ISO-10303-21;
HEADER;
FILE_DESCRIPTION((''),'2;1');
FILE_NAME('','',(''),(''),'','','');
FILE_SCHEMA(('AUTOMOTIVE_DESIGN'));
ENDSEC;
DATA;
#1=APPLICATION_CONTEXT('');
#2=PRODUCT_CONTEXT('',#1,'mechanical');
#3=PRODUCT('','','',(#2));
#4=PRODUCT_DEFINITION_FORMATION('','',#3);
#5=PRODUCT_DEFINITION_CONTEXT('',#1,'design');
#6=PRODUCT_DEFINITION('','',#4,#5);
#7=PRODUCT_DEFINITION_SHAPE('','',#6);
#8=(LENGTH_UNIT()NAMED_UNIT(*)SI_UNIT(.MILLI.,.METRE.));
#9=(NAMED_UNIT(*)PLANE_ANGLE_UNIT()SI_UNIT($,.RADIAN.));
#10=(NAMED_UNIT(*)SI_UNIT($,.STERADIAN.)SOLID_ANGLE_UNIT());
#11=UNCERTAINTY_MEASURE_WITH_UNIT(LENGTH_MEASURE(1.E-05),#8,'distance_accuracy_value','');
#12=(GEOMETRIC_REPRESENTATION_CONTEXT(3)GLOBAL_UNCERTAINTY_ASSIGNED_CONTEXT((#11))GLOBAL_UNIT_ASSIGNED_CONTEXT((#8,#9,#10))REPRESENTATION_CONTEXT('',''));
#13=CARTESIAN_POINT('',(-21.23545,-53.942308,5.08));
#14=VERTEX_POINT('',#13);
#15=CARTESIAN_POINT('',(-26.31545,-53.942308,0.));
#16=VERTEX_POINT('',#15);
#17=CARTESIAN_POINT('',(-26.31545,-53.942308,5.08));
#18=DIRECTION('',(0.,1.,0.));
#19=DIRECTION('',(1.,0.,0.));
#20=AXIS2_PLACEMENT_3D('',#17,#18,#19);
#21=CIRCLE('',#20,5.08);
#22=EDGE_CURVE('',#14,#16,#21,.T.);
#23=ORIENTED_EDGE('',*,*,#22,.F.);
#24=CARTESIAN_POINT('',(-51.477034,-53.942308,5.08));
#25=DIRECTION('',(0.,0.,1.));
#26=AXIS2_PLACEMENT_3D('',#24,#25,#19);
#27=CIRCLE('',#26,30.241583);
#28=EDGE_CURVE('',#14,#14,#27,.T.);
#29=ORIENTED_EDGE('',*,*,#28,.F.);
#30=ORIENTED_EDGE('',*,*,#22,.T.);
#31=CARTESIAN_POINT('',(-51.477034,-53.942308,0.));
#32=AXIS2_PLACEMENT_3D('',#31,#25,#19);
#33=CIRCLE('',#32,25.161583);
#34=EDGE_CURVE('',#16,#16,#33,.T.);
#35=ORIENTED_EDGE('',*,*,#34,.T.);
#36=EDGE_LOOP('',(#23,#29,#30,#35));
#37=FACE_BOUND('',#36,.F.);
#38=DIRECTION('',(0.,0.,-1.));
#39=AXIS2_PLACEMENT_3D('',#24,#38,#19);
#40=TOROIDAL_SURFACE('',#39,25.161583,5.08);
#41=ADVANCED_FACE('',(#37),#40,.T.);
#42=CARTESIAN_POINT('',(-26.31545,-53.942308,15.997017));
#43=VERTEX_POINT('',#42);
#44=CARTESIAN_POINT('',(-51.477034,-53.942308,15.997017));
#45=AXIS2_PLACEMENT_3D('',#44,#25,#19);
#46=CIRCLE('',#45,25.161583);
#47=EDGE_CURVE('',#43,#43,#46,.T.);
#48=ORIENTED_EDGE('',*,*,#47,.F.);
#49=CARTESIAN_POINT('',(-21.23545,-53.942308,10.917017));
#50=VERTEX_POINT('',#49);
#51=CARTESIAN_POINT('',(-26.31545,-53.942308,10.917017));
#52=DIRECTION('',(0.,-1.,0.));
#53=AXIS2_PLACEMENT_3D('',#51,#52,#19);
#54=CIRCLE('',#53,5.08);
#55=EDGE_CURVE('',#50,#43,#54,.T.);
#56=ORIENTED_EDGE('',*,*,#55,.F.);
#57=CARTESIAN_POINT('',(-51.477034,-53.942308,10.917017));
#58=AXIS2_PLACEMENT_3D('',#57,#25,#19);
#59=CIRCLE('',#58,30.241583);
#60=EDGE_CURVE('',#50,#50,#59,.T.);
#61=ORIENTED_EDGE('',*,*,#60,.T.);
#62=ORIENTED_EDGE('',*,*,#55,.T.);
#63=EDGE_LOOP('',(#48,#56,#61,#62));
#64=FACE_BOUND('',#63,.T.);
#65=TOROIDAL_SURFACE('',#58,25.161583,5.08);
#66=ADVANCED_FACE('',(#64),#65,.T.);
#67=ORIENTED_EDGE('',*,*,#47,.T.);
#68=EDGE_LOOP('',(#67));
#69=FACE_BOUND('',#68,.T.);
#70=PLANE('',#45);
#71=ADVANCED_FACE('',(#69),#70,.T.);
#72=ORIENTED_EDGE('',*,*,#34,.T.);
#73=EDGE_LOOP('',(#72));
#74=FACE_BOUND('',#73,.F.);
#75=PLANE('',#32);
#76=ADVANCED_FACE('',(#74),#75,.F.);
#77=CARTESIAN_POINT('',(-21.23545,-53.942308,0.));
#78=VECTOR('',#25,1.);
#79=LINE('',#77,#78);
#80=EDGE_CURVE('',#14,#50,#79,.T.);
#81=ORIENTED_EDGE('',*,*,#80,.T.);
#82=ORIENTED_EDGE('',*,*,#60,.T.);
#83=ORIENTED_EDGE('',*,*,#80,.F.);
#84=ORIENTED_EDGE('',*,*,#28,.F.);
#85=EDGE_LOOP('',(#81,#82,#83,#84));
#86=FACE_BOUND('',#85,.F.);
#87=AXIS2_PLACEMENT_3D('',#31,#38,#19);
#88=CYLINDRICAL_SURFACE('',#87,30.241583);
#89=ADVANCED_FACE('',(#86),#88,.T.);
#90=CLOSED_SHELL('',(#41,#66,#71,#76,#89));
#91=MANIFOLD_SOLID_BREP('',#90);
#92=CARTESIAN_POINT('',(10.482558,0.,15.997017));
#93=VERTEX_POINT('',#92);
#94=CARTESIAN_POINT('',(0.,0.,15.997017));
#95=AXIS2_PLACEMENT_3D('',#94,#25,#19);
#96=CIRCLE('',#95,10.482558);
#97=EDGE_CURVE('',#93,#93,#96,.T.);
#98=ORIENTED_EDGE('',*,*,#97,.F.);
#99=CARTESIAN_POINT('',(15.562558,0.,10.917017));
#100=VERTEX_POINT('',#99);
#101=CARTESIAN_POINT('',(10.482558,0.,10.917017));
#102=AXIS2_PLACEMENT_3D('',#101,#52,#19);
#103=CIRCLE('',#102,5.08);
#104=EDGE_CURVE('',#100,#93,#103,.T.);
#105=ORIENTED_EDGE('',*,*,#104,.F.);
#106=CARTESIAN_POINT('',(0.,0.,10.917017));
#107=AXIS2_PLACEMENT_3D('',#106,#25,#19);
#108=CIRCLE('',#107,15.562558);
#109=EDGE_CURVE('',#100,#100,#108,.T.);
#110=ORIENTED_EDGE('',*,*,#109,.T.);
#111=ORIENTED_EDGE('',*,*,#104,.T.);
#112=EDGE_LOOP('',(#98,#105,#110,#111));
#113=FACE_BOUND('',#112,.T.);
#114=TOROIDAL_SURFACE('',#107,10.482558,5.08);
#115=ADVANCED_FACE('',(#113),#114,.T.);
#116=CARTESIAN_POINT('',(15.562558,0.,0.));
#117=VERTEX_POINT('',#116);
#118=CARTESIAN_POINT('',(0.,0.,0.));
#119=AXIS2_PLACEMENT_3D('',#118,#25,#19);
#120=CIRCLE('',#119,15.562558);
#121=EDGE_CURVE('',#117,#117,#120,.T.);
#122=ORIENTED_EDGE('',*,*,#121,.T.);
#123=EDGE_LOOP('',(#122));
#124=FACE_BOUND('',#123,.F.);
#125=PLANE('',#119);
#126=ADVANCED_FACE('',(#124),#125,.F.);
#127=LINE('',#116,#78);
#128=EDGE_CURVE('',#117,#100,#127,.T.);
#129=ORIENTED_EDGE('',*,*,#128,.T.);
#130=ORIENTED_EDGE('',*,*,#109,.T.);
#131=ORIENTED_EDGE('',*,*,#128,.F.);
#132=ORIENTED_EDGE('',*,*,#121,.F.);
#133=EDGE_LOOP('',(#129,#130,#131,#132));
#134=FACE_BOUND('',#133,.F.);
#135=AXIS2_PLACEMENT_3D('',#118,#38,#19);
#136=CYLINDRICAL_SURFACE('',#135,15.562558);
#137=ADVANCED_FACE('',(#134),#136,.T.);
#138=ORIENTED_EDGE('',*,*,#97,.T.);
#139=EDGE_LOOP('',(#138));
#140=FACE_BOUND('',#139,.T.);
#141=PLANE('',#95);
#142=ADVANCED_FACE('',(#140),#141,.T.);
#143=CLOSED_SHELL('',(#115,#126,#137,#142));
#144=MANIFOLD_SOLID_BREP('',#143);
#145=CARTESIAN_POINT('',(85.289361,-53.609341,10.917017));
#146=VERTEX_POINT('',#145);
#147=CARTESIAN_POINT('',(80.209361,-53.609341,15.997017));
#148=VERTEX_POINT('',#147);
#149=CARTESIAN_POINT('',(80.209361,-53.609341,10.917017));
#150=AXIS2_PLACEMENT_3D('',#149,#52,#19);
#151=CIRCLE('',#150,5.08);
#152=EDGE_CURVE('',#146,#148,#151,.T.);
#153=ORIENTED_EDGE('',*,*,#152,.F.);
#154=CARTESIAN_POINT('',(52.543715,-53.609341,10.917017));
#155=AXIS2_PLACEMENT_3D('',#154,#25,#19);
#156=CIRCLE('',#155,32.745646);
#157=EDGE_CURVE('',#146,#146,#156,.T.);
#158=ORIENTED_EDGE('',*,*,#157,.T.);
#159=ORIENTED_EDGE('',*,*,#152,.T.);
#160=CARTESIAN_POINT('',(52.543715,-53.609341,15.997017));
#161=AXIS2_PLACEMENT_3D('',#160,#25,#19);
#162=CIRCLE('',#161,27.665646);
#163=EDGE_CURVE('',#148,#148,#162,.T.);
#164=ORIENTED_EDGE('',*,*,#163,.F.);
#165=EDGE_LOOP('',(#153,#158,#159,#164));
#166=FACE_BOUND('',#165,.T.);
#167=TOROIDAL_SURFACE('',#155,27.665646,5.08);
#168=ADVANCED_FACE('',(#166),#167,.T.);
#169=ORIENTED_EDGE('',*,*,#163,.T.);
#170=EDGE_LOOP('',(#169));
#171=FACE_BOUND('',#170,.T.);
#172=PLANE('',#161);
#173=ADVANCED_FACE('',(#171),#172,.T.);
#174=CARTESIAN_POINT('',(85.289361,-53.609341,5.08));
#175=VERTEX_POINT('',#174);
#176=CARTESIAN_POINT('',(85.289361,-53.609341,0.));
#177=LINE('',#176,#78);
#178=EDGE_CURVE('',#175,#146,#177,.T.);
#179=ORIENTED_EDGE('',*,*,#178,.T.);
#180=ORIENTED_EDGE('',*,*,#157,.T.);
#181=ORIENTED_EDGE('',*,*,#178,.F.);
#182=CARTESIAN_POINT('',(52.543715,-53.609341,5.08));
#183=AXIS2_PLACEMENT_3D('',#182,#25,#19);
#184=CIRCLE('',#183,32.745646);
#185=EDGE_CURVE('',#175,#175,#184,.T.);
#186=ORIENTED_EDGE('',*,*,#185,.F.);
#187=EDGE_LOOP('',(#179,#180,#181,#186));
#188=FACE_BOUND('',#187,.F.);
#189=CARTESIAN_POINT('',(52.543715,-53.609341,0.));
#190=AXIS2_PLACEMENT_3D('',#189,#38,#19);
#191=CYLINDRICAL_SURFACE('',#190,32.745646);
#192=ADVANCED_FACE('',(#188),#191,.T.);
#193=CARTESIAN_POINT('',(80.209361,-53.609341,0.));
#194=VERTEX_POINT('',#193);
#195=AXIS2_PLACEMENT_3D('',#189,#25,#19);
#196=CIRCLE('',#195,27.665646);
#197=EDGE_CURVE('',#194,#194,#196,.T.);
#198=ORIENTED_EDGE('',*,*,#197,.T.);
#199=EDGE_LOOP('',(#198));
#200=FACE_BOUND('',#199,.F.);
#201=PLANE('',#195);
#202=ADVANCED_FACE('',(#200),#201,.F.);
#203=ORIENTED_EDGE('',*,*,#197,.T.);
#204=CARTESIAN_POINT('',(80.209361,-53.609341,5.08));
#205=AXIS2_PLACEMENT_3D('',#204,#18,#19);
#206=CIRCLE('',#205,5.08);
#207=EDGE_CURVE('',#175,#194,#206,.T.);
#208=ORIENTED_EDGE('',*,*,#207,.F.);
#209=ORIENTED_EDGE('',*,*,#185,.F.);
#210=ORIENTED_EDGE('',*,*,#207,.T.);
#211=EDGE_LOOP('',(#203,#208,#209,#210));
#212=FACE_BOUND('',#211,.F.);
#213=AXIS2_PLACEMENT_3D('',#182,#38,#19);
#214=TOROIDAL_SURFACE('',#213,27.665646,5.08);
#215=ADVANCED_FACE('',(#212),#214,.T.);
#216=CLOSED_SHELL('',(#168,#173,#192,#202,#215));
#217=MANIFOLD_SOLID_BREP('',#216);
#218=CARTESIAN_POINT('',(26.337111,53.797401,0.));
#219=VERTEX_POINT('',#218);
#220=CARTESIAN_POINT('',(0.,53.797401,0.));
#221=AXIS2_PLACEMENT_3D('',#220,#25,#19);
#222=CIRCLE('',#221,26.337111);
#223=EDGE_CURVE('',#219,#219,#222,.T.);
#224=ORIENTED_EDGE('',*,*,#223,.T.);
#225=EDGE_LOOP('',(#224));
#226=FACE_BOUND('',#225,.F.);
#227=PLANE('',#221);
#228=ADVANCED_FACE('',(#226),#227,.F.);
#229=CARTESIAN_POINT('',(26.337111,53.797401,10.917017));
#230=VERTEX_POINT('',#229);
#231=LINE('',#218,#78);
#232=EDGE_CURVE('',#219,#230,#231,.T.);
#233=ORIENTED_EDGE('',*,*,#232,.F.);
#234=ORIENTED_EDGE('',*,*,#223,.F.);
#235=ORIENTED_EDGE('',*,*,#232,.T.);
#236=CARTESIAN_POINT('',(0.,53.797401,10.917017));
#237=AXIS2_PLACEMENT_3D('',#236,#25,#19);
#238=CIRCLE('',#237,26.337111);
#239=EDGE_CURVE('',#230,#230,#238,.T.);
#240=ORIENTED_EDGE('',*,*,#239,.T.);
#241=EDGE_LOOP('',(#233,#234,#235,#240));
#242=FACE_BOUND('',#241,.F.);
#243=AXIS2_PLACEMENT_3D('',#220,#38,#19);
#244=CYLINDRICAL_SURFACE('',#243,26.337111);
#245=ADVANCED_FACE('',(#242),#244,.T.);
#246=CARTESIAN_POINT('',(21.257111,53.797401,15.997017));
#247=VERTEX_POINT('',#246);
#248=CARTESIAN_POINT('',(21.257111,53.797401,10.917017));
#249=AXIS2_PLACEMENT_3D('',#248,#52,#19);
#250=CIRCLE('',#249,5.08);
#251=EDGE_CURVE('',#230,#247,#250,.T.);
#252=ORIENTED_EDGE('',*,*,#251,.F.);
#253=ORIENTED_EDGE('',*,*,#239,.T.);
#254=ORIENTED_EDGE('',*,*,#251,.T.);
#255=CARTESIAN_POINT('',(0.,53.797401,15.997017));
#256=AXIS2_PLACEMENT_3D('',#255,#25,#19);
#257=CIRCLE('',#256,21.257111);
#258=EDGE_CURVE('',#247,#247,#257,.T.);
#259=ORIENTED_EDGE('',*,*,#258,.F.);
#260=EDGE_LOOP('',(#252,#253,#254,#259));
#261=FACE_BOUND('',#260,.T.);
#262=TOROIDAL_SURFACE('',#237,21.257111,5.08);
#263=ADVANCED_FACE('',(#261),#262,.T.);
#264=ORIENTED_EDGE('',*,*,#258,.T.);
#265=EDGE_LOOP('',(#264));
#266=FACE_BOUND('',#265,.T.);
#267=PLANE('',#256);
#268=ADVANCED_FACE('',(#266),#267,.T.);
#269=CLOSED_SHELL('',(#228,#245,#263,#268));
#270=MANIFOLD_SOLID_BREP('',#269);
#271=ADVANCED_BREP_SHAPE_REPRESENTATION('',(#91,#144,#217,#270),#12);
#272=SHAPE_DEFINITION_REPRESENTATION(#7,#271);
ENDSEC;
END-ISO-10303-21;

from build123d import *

# Parameters (mm, degrees)
F1_R     = 32.7456463168
F2_DEPTH = 15.9970168024
F1_R_2   = 30.2415831597
F1_R_3   = 26.3371113364
F0_R     = 15.5625582152
F3_R     = 5.08
F3_2_R   = 5.08
F3_3_R   = 5.08
F3_4_R   = 5.08


# Not quite as in the source:
# - a feature of the source that left no trace in its solid (it failed there, or was rolled back) is left out


with BuildPart() as f2:
    # F1 (on Top) → F2 (new body)
    with BuildSketch(Plane.XY):
        with Locations((52.5437146425, -53.609341383)):
            Circle(F1_R)
    extrude(amount=F2_DEPTH)

    # F3
    f3_edges = [f2.edges().sort_by_distance(p)[0] for p in [
        (19.798068, -53.609341, 15.997017),
        (19.798068, -53.609341, 0),
    ]]
    fillet(f3_edges, radius=F3_R)


with BuildPart() as f2b:
    # F1 (on Top) → F2, piece 2 (new body)
    with BuildSketch(Plane.XY):
        with Locations((-51.4770336449, -53.9423078299)):
            Circle(F1_R_2)
    extrude(amount=F2_DEPTH)

    # F3#2
    f3_2_edges = [f2b.edges().sort_by_distance(p)[0] for p in [
        (-81.718617, -53.942308, 15.997017),
        (-81.718617, -53.942308, 0),
    ]]
    fillet(f3_2_edges, radius=F3_2_R)


with BuildPart() as f2c:
    # F1 (on Top) → F2, piece 3 (new body)
    with BuildSketch(Plane.XY):
        with Locations((0, 53.7974014878)):
            Circle(F1_R_3)
    extrude(amount=F2_DEPTH)

    # F3#3
    f3_3_edges = [f2c.edges().sort_by_distance(p)[0] for p in [
        (-26.337111, 53.797401, 15.997017),
    ]]
    fillet(f3_3_edges, radius=F3_3_R)


with BuildPart() as f2d:
    # F0 (on Top) → F2, piece 4 (new body)
    with BuildSketch(Plane.XY):
        Circle(F0_R)
    extrude(amount=F2_DEPTH)

    # F3#4
    f3_4_edges = [f2d.edges().sort_by_distance(p)[0] for p in [
        (-15.562558, 0, 15.997017),
    ]]
    fillet(f3_4_edges, radius=F3_4_R)


solid = Compound([f2.part, f2b.part, f2c.part, f2d.part])
